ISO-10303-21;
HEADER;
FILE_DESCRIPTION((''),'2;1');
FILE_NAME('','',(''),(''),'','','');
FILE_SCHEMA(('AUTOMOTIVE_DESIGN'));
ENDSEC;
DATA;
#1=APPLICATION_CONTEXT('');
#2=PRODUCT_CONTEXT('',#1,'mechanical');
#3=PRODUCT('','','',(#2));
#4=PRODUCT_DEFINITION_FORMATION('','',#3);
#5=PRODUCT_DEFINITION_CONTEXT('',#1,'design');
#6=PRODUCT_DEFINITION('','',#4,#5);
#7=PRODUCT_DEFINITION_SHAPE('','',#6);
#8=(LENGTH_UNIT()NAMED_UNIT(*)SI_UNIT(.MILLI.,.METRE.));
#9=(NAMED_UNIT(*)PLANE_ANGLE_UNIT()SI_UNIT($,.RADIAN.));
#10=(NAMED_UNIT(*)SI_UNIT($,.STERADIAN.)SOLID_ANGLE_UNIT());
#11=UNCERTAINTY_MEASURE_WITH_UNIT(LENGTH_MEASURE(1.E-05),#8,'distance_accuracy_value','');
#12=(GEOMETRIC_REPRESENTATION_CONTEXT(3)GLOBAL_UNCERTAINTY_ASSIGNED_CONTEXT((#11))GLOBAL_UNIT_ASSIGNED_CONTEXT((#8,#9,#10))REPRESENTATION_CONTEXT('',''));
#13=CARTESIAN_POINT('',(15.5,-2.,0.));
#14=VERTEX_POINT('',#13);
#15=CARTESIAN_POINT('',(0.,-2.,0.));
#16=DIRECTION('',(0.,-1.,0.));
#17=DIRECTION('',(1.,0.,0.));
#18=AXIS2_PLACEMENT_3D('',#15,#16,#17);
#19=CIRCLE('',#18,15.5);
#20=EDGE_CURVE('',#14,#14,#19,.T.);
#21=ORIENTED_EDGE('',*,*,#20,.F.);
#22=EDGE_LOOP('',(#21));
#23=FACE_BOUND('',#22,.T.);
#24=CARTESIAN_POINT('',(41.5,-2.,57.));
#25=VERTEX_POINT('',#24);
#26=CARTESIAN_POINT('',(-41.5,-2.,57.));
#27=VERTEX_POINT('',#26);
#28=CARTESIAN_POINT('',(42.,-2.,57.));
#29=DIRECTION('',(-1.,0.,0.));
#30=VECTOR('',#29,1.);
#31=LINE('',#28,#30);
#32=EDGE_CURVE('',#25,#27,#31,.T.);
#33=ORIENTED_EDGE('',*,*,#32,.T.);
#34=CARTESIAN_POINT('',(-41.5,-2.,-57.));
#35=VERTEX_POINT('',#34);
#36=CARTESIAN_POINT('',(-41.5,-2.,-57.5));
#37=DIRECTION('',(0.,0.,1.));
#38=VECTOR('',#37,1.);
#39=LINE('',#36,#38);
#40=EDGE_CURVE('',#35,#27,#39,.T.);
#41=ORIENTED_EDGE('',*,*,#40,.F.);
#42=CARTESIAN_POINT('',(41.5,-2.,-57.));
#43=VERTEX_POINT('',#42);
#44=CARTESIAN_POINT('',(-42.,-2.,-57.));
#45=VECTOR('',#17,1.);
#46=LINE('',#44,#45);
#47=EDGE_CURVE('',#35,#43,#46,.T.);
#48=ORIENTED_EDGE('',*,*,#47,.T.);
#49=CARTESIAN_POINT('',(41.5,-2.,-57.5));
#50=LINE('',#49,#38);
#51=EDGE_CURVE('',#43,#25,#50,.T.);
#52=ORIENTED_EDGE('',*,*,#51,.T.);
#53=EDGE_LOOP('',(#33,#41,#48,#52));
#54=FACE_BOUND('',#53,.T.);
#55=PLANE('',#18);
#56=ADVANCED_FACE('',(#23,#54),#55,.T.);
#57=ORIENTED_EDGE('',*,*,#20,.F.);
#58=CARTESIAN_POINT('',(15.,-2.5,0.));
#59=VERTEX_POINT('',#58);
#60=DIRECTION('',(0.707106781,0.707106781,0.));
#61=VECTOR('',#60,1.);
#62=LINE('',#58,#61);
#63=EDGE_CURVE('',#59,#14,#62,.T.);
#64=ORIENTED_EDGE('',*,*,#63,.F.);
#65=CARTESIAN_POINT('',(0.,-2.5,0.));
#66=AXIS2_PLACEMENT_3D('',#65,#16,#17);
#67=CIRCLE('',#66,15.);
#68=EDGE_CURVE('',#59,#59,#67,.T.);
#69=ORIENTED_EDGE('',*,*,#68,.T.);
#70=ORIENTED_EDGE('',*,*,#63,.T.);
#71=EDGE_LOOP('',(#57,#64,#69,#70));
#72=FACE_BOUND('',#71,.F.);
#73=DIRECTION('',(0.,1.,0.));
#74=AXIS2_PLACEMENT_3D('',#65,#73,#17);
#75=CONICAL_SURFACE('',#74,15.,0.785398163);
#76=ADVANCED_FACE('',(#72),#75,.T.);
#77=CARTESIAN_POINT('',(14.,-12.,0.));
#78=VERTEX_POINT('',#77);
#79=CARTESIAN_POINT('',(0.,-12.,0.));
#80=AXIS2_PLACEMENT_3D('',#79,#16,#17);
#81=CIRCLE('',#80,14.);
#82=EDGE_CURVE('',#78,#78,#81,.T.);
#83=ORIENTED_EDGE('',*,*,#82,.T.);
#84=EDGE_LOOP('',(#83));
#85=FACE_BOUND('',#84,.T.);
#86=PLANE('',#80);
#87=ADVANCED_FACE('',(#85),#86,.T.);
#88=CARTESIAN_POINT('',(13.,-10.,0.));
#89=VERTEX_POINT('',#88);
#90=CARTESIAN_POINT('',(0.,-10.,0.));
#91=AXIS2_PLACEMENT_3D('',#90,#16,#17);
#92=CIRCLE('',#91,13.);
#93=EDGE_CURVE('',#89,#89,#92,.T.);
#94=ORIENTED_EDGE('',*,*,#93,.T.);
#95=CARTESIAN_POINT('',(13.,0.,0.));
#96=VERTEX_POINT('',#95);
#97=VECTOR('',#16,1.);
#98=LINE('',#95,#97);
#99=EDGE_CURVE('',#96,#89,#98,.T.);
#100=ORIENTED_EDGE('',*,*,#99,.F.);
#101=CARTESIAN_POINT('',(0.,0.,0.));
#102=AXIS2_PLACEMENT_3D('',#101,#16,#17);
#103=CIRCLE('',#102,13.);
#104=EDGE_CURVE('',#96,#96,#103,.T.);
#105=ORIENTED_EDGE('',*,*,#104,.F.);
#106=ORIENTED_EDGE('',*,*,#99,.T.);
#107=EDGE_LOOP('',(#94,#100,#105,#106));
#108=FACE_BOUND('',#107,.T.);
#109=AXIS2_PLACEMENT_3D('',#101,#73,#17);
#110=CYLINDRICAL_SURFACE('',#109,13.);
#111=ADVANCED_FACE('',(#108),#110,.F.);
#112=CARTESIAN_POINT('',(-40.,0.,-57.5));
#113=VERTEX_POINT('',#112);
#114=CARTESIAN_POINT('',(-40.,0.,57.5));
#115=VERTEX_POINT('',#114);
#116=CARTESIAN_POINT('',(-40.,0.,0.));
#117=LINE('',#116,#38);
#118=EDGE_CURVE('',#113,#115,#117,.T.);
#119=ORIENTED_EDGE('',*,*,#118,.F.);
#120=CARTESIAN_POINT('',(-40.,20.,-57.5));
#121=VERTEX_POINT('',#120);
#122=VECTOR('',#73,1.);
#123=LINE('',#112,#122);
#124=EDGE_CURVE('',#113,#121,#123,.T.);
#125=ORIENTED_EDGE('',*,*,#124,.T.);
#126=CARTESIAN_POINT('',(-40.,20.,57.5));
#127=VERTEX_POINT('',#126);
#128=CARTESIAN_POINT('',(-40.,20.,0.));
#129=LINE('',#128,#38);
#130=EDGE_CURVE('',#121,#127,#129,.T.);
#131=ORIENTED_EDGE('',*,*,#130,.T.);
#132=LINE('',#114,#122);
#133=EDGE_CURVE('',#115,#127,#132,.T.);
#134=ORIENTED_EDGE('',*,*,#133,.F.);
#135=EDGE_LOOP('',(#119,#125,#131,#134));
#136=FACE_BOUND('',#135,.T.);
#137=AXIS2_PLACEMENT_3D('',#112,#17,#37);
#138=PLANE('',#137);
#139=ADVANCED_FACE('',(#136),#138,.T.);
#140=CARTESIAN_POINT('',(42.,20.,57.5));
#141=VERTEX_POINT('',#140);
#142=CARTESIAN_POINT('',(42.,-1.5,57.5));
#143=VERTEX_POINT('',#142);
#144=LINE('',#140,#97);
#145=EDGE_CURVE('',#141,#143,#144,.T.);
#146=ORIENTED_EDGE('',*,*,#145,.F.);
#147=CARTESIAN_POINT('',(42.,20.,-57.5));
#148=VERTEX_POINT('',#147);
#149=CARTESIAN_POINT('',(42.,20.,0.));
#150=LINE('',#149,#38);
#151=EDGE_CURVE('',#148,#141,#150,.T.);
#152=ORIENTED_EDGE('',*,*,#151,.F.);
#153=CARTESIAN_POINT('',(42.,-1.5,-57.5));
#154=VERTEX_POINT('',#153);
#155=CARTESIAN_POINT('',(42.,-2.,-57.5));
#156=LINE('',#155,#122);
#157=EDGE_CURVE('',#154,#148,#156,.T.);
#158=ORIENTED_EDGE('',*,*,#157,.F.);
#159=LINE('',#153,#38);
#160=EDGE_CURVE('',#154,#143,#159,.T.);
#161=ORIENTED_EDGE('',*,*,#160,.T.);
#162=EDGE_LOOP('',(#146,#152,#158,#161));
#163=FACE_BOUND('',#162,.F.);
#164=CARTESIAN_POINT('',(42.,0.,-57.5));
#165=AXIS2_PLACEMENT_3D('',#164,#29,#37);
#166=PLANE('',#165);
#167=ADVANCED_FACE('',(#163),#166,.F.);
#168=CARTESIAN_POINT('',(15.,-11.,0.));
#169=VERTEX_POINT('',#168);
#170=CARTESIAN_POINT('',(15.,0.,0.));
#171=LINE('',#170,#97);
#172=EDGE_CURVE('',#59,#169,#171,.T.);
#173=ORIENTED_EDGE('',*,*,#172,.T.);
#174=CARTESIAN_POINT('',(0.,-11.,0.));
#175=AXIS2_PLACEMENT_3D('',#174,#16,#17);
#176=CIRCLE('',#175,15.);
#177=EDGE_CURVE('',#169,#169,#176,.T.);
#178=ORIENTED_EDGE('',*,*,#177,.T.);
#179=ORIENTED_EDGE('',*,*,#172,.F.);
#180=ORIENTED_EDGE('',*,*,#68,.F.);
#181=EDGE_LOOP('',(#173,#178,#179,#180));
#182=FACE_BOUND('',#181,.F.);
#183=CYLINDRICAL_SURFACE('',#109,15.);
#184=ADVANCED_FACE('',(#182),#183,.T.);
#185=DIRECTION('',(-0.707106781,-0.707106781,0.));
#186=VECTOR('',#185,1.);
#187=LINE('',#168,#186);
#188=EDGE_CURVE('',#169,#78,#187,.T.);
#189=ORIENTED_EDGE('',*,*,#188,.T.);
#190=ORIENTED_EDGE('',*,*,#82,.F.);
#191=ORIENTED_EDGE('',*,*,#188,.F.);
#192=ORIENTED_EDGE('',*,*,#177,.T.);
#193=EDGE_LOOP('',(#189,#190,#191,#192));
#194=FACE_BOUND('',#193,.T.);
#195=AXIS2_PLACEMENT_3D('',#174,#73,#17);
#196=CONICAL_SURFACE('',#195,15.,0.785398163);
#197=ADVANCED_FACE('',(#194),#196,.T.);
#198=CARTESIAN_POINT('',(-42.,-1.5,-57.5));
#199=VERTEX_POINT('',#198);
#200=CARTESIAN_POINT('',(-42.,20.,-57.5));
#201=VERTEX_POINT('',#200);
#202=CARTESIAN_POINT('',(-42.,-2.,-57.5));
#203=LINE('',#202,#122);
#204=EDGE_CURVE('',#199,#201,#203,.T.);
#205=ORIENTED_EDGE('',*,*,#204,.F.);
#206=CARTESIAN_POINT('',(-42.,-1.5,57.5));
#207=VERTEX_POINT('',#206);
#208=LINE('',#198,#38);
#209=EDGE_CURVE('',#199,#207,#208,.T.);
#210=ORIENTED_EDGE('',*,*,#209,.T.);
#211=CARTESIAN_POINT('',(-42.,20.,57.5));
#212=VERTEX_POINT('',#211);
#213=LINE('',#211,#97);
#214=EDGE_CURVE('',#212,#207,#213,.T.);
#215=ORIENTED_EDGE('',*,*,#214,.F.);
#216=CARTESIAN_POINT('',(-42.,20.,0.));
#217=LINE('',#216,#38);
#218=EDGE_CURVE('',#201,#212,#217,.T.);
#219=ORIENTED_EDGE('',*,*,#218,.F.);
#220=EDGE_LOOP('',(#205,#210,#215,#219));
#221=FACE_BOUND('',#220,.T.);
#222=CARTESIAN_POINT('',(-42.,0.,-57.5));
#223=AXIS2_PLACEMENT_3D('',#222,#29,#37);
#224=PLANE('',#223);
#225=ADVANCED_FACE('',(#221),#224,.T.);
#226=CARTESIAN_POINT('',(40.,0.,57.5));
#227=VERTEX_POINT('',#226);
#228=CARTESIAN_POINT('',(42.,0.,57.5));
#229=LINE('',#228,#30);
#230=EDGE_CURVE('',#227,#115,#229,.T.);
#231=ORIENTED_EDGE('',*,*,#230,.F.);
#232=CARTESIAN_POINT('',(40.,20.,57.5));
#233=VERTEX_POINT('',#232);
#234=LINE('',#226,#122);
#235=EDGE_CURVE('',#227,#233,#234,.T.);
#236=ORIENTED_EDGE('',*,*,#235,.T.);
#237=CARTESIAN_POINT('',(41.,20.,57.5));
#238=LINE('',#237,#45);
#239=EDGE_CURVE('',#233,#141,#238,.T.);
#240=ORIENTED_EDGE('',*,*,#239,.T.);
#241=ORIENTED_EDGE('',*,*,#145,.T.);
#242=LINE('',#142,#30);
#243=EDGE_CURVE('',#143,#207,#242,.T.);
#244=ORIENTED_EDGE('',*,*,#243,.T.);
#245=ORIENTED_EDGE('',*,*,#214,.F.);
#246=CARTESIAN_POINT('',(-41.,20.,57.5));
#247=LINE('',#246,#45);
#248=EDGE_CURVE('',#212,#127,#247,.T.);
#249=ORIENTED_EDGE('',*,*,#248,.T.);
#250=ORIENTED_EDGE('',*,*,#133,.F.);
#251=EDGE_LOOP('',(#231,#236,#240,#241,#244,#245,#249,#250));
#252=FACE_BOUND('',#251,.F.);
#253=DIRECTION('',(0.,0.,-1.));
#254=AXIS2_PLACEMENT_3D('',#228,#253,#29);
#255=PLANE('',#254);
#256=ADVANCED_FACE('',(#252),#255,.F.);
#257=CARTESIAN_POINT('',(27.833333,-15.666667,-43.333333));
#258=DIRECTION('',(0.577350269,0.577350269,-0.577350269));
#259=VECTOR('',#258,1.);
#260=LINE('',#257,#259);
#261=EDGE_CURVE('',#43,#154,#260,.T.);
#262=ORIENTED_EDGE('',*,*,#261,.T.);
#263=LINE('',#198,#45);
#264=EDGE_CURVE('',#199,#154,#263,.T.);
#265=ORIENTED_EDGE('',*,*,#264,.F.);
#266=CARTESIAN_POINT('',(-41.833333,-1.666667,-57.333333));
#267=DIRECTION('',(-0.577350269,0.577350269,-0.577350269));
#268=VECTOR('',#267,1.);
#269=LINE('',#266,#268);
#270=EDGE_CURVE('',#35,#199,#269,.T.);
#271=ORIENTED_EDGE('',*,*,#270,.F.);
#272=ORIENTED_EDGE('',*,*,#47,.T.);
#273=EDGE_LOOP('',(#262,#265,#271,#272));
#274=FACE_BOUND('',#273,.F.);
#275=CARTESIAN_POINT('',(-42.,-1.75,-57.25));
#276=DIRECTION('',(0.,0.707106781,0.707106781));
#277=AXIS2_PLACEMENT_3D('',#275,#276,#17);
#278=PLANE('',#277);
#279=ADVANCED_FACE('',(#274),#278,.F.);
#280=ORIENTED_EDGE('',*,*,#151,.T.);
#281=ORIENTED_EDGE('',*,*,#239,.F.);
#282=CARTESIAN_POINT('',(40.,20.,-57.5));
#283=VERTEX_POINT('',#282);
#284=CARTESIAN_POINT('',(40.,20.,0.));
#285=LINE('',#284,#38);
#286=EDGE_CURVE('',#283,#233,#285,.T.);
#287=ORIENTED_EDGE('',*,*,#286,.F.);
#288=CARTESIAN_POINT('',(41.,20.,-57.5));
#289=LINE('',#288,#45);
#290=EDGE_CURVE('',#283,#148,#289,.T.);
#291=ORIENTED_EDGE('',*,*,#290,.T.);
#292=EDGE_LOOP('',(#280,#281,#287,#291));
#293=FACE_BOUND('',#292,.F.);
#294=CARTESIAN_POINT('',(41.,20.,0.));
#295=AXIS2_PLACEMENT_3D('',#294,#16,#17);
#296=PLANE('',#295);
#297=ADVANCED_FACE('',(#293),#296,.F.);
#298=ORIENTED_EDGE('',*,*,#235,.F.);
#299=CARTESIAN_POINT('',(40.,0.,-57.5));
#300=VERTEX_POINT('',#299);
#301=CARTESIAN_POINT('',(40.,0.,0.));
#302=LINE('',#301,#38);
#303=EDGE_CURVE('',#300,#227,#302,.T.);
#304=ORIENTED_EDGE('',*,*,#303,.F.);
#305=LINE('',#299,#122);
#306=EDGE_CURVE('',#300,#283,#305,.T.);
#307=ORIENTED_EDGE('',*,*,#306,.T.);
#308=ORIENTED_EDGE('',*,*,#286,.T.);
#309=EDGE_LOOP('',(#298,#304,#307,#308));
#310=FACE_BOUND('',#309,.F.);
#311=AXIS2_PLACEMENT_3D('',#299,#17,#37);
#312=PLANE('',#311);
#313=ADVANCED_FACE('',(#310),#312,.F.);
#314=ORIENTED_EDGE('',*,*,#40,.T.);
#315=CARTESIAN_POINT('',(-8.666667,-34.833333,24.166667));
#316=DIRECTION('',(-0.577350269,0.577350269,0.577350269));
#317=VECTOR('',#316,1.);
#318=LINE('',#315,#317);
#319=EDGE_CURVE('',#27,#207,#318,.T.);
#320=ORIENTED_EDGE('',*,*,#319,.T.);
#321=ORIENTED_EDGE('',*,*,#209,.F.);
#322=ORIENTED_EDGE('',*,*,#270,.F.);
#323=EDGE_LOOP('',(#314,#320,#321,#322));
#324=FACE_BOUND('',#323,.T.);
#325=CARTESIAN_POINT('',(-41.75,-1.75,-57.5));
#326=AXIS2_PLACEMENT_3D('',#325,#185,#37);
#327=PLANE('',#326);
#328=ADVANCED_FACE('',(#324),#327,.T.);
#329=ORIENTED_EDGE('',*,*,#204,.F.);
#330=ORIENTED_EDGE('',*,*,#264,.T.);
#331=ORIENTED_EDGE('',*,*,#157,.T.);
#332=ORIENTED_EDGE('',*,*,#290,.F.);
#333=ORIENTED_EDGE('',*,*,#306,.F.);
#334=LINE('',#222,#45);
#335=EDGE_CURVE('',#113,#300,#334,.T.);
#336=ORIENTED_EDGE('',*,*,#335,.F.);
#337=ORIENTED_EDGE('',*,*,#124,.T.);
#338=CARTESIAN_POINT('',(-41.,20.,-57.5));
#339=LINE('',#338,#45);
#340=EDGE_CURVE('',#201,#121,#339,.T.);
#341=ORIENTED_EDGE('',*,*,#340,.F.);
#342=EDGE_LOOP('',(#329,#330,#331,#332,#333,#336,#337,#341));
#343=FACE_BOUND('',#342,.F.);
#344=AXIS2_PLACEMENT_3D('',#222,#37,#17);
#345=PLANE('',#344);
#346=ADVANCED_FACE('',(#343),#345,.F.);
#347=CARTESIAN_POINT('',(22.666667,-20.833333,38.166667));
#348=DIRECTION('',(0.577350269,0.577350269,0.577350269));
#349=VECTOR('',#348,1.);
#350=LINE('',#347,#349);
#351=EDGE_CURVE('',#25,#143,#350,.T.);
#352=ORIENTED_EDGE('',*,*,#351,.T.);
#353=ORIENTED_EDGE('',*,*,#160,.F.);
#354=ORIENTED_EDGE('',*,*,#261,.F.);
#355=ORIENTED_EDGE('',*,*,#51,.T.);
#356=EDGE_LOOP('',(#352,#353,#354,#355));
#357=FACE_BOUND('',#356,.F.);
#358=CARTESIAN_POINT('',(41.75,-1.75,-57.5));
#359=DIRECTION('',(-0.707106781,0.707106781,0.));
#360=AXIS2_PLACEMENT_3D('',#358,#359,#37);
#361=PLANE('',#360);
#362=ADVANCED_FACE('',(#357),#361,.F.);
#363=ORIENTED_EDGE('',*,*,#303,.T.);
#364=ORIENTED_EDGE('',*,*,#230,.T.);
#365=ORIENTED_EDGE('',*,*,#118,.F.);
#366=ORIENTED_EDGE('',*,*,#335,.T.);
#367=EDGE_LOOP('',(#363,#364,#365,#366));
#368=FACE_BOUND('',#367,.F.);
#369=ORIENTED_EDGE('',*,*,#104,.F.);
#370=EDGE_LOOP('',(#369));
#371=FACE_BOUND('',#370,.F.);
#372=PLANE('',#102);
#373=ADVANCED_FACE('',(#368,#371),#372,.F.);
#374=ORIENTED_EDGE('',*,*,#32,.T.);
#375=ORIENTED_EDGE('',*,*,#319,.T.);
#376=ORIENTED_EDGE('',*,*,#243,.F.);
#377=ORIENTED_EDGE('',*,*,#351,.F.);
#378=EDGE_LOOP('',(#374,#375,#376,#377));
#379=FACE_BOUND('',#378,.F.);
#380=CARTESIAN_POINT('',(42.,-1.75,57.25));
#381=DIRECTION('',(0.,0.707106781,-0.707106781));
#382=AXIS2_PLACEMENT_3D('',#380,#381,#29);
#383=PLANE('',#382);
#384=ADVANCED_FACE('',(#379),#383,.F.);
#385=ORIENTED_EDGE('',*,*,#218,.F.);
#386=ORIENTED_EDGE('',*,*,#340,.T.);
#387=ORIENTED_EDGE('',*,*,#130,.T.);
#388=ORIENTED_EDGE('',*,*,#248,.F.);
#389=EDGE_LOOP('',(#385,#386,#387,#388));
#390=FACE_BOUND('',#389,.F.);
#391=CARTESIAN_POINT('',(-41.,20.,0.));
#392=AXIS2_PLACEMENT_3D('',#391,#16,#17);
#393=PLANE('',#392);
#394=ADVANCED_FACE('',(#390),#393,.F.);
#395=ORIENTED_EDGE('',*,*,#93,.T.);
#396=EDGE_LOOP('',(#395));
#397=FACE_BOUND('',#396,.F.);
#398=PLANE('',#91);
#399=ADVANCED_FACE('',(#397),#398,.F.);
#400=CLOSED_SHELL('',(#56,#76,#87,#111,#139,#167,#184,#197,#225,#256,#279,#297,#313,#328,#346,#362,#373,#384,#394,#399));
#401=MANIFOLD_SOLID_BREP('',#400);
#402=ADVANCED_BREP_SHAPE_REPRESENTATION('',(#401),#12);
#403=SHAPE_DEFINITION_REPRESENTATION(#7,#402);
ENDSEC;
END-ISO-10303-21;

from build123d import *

# Parameters (mm, degrees)
F0_W     = 2
F0_H     = 115
F1_DEPTH = 20
F2_DEPTH = 20
F0_W_2   = 80
F0_R     = 15
F3_DEPTH = 2
F0_R_2   = 13
F4_DEPTH = 12
F5_DEPTH = 10
F6_SIZE  = 0.5
F7_SIZE  = 1


with BuildPart() as f1:
    # F0 (on Front) → F1 (new body)
    with BuildSketch(Plane.XZ):
        with Locations((-41, 0)):
            Rectangle(F0_W, F0_H)
    extrude(amount=-F1_DEPTH)



with BuildPart() as f2:
    # F0 (on Front) → F2 (new body)
    with BuildSketch(Plane.XZ):
        with Locations((41, 0)):
            Rectangle(F0_W, F0_H)
    extrude(amount=-F2_DEPTH)


with BuildPart() as f1_1:
    add(f1.part)

    add(f2.part)  # F3 merges F2
    # F0 (on Front) → F3 (join)
    with BuildSketch(Plane.XZ):
        Rectangle(F0_W_2, F0_H)
        Circle(F0_R, mode=Mode.SUBTRACT)
        with Locations((41, 0)):
            Rectangle(F0_W, F0_H)
        with Locations((-41, 0)):
            Rectangle(F0_W, F0_H)
    extrude(amount=F3_DEPTH)

    # F0 (on Front) → F4 (join)
    with BuildSketch(Plane.XZ):
        Circle(F0_R)
        Circle(F0_R_2, mode=Mode.SUBTRACT)
        Circle(F0_R_2)
    extrude(amount=F4_DEPTH)

    # F0 (on Front) → F5 (cut)
    with BuildSketch(Plane.XZ):
        Circle(F0_R_2)
    extrude(amount=F5_DEPTH, mode=Mode.SUBTRACT)

    # F6
    f6_edges = [f1_1.edges().sort_by_distance(p)[0] for p in [
        (42, -2, 0),
        (0, -2, 57.5),
        (-42, -2, 0),
        (0, -2, -57.5),
        (-15, -2, 0),
    ]]
    chamfer(f6_edges, length=F6_SIZE)

    # F7
    f7_edges = [f1_1.edges().sort_by_distance(p)[0] for p in [
        (-15, -12, 0),
    ]]
    chamfer(f7_edges, length=F7_SIZE)


solid = f1_1.part
